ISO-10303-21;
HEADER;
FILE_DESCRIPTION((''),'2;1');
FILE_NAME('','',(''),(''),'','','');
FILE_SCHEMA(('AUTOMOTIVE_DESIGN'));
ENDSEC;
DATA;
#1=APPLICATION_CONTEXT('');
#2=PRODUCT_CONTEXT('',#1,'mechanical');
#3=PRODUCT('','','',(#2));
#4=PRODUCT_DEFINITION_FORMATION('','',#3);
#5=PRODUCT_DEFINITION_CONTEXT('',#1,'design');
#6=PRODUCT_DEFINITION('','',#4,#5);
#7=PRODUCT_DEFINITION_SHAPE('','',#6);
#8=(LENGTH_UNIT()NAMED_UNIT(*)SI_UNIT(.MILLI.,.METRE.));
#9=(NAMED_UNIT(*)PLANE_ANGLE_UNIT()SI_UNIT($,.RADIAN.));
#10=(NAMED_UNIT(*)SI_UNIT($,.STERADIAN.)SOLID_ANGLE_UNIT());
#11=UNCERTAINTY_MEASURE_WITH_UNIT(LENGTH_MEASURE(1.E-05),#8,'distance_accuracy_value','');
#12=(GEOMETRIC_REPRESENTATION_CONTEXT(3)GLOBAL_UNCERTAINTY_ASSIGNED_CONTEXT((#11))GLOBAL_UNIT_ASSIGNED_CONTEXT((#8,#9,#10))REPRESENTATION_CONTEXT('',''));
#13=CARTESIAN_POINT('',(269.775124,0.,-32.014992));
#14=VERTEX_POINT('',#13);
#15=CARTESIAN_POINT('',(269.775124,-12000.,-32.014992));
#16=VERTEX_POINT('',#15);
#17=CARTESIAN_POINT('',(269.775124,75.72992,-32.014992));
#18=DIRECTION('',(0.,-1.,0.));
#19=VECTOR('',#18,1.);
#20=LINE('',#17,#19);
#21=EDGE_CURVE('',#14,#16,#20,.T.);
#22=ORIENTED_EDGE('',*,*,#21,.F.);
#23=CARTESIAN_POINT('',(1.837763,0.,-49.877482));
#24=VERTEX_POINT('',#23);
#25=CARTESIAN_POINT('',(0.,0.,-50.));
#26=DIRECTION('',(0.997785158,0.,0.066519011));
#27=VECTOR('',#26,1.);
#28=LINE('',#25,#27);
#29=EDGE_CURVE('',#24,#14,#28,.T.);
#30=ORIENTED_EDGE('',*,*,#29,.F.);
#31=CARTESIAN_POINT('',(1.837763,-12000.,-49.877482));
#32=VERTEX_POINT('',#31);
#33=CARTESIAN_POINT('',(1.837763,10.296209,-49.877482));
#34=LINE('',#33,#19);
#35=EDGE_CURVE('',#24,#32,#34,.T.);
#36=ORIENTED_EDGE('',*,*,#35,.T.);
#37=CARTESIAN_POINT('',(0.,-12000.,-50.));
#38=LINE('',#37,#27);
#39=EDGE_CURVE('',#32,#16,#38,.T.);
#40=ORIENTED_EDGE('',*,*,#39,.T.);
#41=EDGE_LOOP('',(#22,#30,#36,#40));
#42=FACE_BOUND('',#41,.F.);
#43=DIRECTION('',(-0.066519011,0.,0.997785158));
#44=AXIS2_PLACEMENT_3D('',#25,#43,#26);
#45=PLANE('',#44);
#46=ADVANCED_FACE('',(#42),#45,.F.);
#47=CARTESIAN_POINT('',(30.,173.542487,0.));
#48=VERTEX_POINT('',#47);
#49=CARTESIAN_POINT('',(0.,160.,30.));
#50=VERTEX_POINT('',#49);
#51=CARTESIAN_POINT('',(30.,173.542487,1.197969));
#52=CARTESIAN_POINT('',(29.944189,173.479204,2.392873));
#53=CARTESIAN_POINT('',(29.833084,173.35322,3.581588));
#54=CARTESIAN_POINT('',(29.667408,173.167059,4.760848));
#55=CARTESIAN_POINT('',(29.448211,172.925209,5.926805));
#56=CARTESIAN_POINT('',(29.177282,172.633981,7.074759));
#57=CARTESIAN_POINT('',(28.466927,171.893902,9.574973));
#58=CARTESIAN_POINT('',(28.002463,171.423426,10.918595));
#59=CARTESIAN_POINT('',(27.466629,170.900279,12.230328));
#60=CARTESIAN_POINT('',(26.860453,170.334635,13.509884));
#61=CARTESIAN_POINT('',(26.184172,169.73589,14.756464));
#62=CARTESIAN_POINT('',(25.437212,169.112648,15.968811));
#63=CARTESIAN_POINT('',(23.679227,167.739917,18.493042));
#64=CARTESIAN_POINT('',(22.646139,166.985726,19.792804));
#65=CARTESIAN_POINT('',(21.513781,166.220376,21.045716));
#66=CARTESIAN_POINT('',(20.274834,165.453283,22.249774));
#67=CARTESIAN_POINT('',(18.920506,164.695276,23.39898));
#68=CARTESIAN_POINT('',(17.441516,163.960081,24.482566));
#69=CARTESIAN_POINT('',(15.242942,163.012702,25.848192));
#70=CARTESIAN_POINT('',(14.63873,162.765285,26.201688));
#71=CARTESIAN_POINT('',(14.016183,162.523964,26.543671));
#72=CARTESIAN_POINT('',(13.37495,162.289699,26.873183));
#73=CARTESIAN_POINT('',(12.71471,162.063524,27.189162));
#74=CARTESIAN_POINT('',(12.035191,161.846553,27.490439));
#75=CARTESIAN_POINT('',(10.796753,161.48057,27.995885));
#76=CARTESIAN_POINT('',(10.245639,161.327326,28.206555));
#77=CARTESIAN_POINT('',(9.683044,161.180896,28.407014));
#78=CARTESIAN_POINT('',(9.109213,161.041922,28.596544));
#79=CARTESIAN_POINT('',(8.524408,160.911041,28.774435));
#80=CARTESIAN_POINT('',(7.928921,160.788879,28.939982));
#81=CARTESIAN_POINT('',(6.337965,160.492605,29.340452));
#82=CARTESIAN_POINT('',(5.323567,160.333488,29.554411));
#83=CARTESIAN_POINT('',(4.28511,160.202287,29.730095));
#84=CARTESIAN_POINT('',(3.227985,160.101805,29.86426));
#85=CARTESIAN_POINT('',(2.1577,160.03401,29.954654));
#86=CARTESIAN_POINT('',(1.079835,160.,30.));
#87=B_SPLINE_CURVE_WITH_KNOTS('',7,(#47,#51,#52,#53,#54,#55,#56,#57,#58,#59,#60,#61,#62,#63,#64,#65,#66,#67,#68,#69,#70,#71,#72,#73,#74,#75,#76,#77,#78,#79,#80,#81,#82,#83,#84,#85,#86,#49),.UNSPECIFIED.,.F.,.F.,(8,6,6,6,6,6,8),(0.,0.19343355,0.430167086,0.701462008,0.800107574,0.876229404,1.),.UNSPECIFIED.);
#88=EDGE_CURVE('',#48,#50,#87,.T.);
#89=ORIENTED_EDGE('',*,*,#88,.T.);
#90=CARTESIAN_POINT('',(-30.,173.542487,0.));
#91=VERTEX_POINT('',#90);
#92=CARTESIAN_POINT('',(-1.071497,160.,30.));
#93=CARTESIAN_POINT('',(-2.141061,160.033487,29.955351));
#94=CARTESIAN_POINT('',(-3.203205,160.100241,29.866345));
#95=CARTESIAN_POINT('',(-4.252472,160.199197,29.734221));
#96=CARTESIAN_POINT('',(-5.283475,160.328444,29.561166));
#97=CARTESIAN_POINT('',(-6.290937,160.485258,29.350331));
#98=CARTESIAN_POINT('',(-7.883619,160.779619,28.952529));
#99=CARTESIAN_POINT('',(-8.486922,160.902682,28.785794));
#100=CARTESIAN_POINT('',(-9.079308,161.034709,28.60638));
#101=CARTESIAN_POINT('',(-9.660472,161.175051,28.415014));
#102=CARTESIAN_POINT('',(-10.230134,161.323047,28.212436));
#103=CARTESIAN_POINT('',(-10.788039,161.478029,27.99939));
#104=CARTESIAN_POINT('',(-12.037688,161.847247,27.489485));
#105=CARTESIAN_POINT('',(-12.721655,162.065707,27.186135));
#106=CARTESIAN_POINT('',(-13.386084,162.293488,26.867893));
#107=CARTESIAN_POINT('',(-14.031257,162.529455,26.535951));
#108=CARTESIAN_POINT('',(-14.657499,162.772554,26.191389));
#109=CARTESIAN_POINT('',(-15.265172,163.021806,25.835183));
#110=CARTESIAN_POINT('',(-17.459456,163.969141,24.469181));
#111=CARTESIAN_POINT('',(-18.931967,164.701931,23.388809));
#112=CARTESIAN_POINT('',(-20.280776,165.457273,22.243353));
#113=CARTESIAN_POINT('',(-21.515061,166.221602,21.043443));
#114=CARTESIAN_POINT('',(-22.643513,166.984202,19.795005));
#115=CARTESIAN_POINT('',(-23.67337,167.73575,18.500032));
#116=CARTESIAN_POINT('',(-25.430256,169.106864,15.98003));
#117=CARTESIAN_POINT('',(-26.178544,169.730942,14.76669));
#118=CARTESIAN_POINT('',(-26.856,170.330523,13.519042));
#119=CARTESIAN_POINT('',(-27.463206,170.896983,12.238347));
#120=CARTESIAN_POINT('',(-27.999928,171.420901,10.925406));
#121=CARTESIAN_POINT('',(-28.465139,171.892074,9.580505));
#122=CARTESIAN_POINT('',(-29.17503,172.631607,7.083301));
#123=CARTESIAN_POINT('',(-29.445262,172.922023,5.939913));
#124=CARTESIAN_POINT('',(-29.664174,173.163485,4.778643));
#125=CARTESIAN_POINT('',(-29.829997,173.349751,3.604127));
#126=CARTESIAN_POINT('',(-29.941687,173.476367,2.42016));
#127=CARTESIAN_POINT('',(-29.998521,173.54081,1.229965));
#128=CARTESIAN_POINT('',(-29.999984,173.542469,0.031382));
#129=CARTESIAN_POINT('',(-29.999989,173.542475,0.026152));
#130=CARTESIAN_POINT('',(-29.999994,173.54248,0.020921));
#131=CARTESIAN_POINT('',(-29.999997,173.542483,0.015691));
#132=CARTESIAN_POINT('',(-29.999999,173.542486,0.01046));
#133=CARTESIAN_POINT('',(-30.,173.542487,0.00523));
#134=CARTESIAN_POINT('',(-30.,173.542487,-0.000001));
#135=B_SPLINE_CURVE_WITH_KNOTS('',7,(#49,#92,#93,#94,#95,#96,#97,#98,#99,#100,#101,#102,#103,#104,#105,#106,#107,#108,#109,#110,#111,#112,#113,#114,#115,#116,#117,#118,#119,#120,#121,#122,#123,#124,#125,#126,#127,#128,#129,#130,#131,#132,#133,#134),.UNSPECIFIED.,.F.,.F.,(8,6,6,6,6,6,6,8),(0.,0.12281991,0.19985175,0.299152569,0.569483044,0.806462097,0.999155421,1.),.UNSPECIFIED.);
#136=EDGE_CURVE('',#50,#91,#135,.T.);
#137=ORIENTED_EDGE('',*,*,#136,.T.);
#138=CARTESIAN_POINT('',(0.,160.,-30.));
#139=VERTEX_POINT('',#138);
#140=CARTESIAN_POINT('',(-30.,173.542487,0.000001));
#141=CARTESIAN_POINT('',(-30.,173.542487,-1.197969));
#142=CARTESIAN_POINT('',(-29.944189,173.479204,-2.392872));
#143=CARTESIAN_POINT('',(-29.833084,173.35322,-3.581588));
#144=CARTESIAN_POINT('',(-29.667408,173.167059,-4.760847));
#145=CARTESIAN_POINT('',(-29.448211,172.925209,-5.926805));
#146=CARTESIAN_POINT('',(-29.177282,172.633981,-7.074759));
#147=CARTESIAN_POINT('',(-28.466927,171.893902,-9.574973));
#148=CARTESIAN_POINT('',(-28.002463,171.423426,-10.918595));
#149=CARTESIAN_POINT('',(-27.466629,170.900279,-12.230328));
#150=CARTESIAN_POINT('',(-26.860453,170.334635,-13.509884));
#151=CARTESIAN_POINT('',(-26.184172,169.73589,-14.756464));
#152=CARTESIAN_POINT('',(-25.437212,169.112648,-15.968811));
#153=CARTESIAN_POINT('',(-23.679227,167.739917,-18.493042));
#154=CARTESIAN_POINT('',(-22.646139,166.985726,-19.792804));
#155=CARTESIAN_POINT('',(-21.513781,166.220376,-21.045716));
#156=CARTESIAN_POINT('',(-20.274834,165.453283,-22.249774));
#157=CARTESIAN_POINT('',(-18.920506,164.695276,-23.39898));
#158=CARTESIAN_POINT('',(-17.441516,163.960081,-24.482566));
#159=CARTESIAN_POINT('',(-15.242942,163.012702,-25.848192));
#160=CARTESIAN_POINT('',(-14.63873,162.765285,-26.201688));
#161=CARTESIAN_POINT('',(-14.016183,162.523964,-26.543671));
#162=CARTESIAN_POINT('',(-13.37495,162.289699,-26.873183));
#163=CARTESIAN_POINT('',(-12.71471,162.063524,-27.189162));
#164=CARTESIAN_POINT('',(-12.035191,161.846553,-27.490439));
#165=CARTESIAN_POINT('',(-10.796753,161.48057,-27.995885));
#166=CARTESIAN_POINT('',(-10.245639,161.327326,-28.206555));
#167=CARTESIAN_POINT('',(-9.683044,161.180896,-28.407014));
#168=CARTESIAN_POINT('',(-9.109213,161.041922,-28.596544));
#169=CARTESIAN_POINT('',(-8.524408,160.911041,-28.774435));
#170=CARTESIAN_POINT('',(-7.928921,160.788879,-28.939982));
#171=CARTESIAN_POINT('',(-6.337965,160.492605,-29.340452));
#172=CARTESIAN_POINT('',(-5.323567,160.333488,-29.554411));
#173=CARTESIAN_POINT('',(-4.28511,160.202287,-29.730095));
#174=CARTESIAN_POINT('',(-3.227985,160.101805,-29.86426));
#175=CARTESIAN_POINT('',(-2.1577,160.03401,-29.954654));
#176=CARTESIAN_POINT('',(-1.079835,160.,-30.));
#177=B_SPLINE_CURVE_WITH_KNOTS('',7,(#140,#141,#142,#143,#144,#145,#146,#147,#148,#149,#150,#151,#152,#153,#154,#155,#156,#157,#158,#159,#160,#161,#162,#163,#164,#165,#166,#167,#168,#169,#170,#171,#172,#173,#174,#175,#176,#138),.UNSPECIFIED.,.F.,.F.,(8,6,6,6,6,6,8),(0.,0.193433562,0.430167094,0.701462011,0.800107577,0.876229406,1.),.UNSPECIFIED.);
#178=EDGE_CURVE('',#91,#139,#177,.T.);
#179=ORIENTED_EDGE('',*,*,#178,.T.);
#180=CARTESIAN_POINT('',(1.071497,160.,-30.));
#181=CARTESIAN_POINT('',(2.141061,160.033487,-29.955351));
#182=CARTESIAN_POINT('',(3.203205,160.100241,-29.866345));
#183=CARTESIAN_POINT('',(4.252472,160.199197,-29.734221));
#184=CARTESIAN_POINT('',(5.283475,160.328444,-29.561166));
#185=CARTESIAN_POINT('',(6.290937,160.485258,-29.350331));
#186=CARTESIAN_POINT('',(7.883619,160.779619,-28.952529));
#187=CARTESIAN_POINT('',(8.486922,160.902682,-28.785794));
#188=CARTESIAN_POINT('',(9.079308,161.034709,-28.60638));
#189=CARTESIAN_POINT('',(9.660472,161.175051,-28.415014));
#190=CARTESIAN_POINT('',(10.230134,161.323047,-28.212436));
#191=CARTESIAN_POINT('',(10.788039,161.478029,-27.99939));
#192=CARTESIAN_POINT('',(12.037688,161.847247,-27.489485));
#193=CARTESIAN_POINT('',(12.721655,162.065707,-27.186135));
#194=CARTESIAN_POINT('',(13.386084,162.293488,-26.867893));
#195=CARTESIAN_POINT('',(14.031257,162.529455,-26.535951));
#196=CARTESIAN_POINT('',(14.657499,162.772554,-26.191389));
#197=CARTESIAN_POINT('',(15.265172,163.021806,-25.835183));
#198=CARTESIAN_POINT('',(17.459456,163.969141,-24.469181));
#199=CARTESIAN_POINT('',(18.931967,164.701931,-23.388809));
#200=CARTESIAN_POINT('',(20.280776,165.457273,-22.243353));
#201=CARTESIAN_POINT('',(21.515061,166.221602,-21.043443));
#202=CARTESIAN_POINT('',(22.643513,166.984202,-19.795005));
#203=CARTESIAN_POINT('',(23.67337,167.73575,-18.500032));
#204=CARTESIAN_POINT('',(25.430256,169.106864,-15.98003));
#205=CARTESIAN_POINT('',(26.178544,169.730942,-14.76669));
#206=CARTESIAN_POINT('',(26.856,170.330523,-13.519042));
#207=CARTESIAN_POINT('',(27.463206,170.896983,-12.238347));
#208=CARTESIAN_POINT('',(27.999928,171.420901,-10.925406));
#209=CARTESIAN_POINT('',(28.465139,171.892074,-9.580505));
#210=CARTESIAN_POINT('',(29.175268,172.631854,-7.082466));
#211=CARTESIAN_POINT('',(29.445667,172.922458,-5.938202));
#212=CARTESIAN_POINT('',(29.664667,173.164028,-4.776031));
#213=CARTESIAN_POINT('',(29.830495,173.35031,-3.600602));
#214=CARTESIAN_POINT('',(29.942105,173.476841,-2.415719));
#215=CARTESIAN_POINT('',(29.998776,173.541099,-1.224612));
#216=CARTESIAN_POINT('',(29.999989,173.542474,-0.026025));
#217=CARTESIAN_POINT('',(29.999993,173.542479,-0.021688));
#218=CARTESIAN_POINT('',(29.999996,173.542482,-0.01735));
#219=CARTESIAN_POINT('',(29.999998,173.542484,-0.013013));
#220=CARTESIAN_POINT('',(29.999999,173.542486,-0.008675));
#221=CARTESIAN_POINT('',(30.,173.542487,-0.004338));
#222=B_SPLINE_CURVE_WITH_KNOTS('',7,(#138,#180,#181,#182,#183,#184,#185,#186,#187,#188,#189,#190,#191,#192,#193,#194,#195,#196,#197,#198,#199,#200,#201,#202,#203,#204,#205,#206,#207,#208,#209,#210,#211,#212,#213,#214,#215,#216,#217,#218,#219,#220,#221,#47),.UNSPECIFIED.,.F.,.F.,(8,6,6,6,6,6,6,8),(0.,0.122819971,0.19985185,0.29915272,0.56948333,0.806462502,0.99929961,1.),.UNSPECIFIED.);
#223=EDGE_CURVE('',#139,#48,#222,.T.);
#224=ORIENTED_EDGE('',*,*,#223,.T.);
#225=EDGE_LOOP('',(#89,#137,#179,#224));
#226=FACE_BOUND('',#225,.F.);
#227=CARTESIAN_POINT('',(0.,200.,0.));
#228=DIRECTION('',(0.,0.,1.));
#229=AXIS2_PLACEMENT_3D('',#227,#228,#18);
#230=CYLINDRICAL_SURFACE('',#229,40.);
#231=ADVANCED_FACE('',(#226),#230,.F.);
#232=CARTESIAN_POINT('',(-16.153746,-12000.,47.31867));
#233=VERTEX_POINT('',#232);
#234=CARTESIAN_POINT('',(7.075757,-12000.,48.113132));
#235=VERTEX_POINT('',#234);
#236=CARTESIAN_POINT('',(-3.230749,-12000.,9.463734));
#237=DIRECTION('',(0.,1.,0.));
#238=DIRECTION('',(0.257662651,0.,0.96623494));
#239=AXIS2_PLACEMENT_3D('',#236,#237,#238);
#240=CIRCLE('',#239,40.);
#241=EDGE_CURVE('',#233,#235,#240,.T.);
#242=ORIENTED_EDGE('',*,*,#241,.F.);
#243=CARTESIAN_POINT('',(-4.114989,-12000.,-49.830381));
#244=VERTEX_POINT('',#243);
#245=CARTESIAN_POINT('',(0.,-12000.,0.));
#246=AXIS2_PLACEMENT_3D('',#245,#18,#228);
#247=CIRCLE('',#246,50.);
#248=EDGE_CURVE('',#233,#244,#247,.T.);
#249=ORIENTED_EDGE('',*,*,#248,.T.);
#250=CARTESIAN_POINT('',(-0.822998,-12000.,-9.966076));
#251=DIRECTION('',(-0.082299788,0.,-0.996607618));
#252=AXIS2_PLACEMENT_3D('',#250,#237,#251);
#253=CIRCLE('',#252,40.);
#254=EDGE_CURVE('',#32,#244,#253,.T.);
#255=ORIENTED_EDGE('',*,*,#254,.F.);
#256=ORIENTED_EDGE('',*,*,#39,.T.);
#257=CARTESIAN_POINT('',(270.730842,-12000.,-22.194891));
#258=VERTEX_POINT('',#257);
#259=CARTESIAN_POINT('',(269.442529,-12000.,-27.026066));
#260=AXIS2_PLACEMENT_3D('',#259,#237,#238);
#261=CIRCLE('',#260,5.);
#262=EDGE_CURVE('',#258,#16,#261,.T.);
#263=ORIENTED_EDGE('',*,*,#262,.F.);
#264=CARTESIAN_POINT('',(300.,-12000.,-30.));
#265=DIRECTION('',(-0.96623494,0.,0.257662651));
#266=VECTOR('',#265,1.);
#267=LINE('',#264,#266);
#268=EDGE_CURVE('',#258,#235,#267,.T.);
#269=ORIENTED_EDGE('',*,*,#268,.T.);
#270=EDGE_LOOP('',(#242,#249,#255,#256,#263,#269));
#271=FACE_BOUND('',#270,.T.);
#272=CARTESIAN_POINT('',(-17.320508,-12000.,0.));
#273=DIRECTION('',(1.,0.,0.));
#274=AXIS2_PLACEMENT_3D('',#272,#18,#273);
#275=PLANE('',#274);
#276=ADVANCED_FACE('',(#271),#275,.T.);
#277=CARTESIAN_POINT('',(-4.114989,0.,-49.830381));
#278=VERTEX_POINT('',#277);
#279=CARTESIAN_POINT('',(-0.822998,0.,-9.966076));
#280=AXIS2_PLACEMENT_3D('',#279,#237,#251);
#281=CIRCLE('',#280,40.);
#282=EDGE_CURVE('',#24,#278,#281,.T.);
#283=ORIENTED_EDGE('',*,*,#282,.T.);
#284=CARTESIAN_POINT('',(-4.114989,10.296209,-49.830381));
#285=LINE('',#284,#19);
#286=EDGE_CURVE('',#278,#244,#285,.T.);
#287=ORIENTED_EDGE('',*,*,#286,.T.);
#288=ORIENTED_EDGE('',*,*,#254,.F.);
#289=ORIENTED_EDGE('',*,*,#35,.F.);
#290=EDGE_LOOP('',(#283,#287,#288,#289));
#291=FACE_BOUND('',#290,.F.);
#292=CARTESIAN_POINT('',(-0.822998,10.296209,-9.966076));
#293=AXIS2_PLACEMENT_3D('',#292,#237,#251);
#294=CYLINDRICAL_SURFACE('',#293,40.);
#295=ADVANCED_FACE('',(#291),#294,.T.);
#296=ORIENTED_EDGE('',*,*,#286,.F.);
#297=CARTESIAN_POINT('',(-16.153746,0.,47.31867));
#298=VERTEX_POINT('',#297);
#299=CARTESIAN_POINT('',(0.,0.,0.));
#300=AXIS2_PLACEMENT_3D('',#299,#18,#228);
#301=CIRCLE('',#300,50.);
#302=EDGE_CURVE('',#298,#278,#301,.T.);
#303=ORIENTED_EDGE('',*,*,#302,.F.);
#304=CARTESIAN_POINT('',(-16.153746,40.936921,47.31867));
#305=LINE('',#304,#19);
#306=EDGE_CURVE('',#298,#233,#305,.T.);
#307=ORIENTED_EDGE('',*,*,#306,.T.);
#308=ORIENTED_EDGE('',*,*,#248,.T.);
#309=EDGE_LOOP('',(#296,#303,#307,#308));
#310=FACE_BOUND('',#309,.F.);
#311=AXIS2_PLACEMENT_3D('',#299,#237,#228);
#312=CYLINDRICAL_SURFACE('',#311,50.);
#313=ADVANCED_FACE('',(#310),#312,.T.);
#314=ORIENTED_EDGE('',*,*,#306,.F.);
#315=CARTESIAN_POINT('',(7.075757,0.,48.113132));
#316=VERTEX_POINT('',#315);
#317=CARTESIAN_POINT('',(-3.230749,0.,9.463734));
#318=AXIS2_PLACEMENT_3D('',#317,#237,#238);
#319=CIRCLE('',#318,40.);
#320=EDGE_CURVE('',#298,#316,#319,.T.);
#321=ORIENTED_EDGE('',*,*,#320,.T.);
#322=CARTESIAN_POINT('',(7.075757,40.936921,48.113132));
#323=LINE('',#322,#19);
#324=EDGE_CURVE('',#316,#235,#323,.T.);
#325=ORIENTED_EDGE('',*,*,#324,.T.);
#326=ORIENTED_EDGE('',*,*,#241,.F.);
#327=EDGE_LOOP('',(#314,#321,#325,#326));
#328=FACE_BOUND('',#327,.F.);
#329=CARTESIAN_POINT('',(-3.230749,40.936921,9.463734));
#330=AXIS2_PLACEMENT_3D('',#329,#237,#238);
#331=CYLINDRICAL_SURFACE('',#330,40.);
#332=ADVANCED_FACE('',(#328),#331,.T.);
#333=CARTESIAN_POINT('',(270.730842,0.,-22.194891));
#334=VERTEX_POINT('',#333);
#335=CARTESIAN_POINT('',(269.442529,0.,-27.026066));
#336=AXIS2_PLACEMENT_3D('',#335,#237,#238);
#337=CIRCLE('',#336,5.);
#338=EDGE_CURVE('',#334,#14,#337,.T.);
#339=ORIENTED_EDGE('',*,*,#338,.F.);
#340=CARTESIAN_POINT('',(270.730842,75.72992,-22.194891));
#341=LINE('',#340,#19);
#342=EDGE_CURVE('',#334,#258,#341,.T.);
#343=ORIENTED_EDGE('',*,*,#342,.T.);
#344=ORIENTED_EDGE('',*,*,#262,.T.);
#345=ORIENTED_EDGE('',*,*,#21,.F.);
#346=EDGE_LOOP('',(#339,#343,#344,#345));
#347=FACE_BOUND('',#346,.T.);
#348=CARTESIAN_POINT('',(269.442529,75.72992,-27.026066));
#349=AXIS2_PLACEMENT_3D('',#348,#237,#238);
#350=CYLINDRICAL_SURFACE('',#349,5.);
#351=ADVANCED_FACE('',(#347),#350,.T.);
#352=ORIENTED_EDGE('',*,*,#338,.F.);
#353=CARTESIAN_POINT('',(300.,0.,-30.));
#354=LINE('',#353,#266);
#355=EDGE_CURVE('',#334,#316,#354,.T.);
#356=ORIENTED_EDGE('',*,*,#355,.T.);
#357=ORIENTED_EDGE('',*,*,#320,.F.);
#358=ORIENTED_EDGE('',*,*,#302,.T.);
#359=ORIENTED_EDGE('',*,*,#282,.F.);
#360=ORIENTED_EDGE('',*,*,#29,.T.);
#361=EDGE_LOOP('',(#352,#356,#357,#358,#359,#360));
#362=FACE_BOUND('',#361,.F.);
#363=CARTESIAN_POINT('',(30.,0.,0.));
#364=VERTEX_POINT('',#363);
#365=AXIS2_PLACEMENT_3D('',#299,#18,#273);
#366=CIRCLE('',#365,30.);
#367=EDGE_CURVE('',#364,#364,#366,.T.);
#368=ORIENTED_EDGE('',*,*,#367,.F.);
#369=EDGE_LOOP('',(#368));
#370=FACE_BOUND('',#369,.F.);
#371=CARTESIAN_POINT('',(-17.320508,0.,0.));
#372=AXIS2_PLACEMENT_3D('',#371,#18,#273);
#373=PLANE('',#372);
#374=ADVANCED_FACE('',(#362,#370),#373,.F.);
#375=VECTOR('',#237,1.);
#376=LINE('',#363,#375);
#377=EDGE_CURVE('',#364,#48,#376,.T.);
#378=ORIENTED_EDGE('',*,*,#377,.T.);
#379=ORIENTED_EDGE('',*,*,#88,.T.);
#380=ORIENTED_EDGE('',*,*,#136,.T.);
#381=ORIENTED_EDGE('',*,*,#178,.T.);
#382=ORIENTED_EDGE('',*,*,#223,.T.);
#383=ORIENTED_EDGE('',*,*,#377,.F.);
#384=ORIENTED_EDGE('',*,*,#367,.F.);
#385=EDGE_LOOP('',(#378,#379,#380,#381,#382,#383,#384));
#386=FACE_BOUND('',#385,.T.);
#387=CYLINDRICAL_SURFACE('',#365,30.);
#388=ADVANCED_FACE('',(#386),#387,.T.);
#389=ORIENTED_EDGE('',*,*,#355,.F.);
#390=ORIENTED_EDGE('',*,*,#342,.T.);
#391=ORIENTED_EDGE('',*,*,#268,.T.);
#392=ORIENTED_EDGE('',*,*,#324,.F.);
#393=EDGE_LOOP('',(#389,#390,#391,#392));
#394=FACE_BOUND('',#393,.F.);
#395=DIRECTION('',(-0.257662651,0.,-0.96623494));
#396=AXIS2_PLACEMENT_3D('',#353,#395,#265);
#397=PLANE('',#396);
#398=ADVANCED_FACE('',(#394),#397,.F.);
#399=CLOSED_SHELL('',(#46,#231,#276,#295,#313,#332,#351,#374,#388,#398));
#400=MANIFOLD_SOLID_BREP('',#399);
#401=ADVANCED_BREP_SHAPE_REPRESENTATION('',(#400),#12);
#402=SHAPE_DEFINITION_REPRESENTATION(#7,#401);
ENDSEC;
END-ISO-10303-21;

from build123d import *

# Parameters (mm, degrees)
F1_DEPTH    = 12000
F2_T1_DEPTH = 12081.8738417293
F2_T3_DEPTH = 12020.5924187821
F3_T1_DEPTH = 12151.4598397462
F4_R        = 30
F5_DEPTH    = 200
F7_DEPTH    = 50


# Not quite as in the source:
# - a fillet or chamfer that OpenCascade refuses, or shapes differently, is made with other operations: its cross-section is extruded or revolved along the edge and cut away or added


with BuildPart() as f1:
    # F0 (on Front) → F1 (new body)
    with BuildSketch(Plane.XZ):
        with BuildLine():
            Line((0, -30), (0, 50))
            ThreePointArc((0, 50), (-50, 0), (0, -50))
            Line((0, -50), (0, -30))
        make_face()
        Polygon((300, -30), (0, 50), (0, -30), align=None)
        Polygon((300, -30), (0, -30), (0, -50), align=None)
    extrude(amount=F1_DEPTH)

    # F2: fillet of radius 40 on 2 edges, made by hand

    # F2_s2 → F2_t1 (cut)
    with BuildSketch(Plane.XZ.offset(-40.9369208646)):
        with BuildLine():
            ThreePointArc((7.0757568477, 48.1131315073), (-4.5979720129, 49.4403608659), (-16.1537458737, 47.3186696162))
            ThreePointArc((-16.1537458737, 47.3186696162), (-8.1873841729, 49.325112675), (0, 50))
            Line((0, 50), (7.0757568477, 48.1131315073))
        make_face()
    extrude(amount=F2_T1_DEPTH, mode=Mode.SUBTRACT)

    # F2_s4 → F2_t3 (cut)
    with BuildSketch(Plane.XZ.offset(-10.296209391)):
        with BuildLine():
            ThreePointArc((-4.1149894068, -49.8303809155), (-1.1394908774, -49.9648240658), (1.8377625396, -49.8774824974))
            Line((1.8377625396, -49.8774824974), (0, -50))
            ThreePointArc((0, -50), (-2.0592418782, -49.957577232), (-4.1149894068, -49.8303809155))
        make_face()
    extrude(amount=F2_T3_DEPTH, mode=Mode.SUBTRACT)

    # F3: fillet of radius 5 on 1 edges, made by hand

    # F3_s2 → F3_t1 (cut)
    with BuildSketch(Plane.XZ.offset(-75.7299198731)):
        with BuildLine():
            ThreePointArc((270.7308421782, -22.1948912475), (274.4190165752, -27.51039091), (269.775123978, -32.0149917348))
            Line((269.775123978, -32.0149917348), (300, -30))
            Line((300, -30), (270.7308421782, -22.1948912475))
        make_face()
    extrude(amount=F3_T1_DEPTH, mode=Mode.SUBTRACT)

    # F4 (on Front) → F5 (join)
    with BuildSketch(Plane.XZ):
        Circle(F4_R)
    extrude(amount=-F5_DEPTH)

    # F6 (on Top) → F7 (cut, symmetric)
    with BuildSketch(Plane.XY):
        with BuildLine():
            ThreePointArc((0, 160), (28.2842712475, 171.7157287525), (40, 200))
            ThreePointArc((40, 200), (-28.2842712475, 228.2842712475), (0, 160))
        make_face()
    extrude(amount=F7_DEPTH, both=True, mode=Mode.SUBTRACT)


solid = f1.part
